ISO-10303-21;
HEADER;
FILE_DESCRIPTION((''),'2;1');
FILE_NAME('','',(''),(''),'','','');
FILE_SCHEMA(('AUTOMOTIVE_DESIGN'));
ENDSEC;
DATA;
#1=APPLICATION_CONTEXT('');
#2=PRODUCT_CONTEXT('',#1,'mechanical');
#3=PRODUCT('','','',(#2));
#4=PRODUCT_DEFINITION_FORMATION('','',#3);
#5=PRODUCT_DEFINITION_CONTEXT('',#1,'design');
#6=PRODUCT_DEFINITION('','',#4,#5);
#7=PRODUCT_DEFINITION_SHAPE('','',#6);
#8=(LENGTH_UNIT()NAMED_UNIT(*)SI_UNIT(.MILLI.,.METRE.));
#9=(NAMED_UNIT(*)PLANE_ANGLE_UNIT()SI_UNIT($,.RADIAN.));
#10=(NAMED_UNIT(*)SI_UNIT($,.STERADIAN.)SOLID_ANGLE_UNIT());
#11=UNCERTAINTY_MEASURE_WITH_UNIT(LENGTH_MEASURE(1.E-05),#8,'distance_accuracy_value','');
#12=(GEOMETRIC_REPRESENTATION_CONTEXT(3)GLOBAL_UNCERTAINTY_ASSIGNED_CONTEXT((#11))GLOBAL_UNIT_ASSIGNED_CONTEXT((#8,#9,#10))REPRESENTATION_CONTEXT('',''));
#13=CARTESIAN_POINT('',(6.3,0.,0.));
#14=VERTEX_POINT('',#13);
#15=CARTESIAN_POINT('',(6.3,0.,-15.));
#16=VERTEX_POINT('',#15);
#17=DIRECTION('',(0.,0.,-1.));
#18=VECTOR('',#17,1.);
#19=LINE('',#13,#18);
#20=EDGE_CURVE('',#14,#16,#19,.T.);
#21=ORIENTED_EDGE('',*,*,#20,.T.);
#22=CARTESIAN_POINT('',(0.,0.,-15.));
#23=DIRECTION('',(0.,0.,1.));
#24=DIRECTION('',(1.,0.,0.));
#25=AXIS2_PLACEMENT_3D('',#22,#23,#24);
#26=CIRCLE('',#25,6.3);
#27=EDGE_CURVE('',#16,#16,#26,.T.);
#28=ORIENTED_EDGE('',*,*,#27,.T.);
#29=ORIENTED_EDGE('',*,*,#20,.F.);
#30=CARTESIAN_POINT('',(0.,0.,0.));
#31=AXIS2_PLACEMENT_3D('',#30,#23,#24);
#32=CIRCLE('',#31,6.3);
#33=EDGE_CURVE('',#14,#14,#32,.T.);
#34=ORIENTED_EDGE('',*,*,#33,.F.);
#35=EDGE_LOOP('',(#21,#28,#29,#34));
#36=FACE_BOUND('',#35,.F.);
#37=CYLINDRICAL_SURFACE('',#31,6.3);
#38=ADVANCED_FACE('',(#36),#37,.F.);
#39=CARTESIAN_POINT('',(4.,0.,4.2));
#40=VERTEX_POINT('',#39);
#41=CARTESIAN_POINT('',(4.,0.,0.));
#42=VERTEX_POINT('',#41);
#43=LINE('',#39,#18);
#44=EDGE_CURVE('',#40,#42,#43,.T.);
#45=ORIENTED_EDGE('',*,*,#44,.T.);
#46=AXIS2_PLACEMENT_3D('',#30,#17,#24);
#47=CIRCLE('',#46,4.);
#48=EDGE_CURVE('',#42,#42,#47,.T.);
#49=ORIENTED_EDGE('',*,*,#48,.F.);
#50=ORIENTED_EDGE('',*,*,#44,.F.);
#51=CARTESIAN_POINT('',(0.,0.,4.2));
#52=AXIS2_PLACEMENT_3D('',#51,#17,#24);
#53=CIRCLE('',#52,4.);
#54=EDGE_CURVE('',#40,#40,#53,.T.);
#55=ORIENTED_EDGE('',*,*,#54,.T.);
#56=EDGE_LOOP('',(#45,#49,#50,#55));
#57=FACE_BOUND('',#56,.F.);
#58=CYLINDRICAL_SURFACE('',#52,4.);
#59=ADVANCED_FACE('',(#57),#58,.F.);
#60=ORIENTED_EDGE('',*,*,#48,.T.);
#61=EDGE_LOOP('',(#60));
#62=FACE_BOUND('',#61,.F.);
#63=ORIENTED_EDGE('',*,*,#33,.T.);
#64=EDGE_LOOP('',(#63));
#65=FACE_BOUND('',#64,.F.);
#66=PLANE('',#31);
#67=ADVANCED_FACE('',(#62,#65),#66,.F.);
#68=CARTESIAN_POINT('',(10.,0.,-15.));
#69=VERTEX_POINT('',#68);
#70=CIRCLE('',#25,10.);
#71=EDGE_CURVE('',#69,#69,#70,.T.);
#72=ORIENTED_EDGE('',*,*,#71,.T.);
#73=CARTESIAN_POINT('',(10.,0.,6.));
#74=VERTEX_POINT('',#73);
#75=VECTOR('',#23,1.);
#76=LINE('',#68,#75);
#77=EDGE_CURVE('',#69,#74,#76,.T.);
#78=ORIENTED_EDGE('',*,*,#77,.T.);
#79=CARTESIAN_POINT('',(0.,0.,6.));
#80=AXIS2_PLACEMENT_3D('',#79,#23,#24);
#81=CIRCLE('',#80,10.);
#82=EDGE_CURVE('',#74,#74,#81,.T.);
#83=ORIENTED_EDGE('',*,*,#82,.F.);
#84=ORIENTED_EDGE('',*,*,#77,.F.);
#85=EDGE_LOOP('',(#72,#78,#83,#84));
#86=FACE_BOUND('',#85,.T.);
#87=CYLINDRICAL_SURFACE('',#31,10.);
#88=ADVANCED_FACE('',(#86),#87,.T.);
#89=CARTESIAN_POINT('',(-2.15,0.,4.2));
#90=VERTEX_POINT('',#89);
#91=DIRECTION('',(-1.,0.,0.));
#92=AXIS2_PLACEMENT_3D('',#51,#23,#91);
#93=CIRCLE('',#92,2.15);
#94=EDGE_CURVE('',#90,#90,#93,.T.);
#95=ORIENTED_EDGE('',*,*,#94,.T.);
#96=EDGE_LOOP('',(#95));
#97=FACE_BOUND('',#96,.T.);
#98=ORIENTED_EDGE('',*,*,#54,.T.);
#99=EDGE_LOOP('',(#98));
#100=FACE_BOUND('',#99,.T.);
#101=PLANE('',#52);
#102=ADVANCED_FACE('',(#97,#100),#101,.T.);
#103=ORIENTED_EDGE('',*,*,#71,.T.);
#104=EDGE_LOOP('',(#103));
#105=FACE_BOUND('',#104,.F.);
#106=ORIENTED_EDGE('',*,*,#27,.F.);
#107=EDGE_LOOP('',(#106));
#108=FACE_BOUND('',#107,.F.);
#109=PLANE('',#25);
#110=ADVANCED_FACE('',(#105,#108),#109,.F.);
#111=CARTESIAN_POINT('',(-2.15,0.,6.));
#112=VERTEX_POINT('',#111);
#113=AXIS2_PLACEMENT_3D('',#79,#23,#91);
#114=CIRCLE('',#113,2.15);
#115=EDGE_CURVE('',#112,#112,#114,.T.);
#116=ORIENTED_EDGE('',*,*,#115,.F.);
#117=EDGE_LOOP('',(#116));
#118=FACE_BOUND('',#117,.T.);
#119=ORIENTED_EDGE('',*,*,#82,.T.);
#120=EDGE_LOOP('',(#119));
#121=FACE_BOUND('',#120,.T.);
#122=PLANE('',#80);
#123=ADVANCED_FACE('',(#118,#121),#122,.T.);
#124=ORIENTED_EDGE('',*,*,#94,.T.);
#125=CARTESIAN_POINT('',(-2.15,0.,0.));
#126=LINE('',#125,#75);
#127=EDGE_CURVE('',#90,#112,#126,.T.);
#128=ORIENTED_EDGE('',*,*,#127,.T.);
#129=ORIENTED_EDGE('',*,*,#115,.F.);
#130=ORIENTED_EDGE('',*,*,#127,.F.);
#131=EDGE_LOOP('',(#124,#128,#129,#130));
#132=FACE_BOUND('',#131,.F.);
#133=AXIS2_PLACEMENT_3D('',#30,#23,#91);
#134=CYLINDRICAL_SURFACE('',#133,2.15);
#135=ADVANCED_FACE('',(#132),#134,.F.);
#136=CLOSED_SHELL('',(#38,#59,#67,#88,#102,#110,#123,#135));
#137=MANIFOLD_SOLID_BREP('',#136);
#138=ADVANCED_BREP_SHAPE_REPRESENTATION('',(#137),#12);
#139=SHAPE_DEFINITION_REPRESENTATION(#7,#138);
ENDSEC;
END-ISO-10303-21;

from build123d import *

# Parameters (mm, degrees)
F0_R           = 10
F0_R_2         = 6.3
F1_DEPTH       = 6
F2_DEPTH       = 15
F4_R           = 1
F1_FACE_R      = 10
F7_D           = 4.3
F7_CBORE_D     = 8
F7_CBORE_DEPTH = 4.2
F8_D           = 3.2
F8_DEPTH       = 8
F8_START       = 6
F8_TIP         = 0.9613769904


with BuildPart() as f1:
    # F0 (on Top) → F1 (new body)
    with BuildSketch(Plane.XY):
        Circle(F0_R)
        Circle(F0_R_2, mode=Mode.SUBTRACT)
        Circle(F0_R_2)
    extrude(amount=F1_DEPTH)

    # F0 (on Top) → F2 (join)
    with BuildSketch(Plane.XY):
        Circle(F0_R)
        Circle(F0_R_2, mode=Mode.SUBTRACT)
    extrude(amount=-F2_DEPTH)

    # F7 (through all)
    with Locations(Plane(origin=(0, 0, 0), x_dir=(1, 0, 0), z_dir=(0, 0, -1))):
        with Locations((0, 0)):
            CounterBoreHole(F7_D / 2, F7_CBORE_D / 2, F7_CBORE_DEPTH)


with BuildPart() as f5:
    # F4 (on offset) → F5 section 0
    with BuildSketch(Plane.XY.offset(16)):
        Circle(F4_R)
    # F1_face (on face) → F5 section 1
    with BuildSketch(Plane.XY.offset(6)):
        Circle(F1_FACE_R)
    loft()

    # F8
    # its depths count from where the whole tool has entered the part; down to there all is cleared
    with Locations(Plane(origin=(0, 0, 0), x_dir=(1, 0, 0), z_dir=(0, 0, -1)).offset(-F8_START)):
        with Locations((0, 0)):
            Hole(F8_D / 2, depth=F8_DEPTH)
            with Locations((0, 0, -(F8_DEPTH + F8_TIP / 2))):  # 118° drill point
                Cone(0, F8_D / 2, F8_TIP, mode=Mode.SUBTRACT)


solid = f1.part
